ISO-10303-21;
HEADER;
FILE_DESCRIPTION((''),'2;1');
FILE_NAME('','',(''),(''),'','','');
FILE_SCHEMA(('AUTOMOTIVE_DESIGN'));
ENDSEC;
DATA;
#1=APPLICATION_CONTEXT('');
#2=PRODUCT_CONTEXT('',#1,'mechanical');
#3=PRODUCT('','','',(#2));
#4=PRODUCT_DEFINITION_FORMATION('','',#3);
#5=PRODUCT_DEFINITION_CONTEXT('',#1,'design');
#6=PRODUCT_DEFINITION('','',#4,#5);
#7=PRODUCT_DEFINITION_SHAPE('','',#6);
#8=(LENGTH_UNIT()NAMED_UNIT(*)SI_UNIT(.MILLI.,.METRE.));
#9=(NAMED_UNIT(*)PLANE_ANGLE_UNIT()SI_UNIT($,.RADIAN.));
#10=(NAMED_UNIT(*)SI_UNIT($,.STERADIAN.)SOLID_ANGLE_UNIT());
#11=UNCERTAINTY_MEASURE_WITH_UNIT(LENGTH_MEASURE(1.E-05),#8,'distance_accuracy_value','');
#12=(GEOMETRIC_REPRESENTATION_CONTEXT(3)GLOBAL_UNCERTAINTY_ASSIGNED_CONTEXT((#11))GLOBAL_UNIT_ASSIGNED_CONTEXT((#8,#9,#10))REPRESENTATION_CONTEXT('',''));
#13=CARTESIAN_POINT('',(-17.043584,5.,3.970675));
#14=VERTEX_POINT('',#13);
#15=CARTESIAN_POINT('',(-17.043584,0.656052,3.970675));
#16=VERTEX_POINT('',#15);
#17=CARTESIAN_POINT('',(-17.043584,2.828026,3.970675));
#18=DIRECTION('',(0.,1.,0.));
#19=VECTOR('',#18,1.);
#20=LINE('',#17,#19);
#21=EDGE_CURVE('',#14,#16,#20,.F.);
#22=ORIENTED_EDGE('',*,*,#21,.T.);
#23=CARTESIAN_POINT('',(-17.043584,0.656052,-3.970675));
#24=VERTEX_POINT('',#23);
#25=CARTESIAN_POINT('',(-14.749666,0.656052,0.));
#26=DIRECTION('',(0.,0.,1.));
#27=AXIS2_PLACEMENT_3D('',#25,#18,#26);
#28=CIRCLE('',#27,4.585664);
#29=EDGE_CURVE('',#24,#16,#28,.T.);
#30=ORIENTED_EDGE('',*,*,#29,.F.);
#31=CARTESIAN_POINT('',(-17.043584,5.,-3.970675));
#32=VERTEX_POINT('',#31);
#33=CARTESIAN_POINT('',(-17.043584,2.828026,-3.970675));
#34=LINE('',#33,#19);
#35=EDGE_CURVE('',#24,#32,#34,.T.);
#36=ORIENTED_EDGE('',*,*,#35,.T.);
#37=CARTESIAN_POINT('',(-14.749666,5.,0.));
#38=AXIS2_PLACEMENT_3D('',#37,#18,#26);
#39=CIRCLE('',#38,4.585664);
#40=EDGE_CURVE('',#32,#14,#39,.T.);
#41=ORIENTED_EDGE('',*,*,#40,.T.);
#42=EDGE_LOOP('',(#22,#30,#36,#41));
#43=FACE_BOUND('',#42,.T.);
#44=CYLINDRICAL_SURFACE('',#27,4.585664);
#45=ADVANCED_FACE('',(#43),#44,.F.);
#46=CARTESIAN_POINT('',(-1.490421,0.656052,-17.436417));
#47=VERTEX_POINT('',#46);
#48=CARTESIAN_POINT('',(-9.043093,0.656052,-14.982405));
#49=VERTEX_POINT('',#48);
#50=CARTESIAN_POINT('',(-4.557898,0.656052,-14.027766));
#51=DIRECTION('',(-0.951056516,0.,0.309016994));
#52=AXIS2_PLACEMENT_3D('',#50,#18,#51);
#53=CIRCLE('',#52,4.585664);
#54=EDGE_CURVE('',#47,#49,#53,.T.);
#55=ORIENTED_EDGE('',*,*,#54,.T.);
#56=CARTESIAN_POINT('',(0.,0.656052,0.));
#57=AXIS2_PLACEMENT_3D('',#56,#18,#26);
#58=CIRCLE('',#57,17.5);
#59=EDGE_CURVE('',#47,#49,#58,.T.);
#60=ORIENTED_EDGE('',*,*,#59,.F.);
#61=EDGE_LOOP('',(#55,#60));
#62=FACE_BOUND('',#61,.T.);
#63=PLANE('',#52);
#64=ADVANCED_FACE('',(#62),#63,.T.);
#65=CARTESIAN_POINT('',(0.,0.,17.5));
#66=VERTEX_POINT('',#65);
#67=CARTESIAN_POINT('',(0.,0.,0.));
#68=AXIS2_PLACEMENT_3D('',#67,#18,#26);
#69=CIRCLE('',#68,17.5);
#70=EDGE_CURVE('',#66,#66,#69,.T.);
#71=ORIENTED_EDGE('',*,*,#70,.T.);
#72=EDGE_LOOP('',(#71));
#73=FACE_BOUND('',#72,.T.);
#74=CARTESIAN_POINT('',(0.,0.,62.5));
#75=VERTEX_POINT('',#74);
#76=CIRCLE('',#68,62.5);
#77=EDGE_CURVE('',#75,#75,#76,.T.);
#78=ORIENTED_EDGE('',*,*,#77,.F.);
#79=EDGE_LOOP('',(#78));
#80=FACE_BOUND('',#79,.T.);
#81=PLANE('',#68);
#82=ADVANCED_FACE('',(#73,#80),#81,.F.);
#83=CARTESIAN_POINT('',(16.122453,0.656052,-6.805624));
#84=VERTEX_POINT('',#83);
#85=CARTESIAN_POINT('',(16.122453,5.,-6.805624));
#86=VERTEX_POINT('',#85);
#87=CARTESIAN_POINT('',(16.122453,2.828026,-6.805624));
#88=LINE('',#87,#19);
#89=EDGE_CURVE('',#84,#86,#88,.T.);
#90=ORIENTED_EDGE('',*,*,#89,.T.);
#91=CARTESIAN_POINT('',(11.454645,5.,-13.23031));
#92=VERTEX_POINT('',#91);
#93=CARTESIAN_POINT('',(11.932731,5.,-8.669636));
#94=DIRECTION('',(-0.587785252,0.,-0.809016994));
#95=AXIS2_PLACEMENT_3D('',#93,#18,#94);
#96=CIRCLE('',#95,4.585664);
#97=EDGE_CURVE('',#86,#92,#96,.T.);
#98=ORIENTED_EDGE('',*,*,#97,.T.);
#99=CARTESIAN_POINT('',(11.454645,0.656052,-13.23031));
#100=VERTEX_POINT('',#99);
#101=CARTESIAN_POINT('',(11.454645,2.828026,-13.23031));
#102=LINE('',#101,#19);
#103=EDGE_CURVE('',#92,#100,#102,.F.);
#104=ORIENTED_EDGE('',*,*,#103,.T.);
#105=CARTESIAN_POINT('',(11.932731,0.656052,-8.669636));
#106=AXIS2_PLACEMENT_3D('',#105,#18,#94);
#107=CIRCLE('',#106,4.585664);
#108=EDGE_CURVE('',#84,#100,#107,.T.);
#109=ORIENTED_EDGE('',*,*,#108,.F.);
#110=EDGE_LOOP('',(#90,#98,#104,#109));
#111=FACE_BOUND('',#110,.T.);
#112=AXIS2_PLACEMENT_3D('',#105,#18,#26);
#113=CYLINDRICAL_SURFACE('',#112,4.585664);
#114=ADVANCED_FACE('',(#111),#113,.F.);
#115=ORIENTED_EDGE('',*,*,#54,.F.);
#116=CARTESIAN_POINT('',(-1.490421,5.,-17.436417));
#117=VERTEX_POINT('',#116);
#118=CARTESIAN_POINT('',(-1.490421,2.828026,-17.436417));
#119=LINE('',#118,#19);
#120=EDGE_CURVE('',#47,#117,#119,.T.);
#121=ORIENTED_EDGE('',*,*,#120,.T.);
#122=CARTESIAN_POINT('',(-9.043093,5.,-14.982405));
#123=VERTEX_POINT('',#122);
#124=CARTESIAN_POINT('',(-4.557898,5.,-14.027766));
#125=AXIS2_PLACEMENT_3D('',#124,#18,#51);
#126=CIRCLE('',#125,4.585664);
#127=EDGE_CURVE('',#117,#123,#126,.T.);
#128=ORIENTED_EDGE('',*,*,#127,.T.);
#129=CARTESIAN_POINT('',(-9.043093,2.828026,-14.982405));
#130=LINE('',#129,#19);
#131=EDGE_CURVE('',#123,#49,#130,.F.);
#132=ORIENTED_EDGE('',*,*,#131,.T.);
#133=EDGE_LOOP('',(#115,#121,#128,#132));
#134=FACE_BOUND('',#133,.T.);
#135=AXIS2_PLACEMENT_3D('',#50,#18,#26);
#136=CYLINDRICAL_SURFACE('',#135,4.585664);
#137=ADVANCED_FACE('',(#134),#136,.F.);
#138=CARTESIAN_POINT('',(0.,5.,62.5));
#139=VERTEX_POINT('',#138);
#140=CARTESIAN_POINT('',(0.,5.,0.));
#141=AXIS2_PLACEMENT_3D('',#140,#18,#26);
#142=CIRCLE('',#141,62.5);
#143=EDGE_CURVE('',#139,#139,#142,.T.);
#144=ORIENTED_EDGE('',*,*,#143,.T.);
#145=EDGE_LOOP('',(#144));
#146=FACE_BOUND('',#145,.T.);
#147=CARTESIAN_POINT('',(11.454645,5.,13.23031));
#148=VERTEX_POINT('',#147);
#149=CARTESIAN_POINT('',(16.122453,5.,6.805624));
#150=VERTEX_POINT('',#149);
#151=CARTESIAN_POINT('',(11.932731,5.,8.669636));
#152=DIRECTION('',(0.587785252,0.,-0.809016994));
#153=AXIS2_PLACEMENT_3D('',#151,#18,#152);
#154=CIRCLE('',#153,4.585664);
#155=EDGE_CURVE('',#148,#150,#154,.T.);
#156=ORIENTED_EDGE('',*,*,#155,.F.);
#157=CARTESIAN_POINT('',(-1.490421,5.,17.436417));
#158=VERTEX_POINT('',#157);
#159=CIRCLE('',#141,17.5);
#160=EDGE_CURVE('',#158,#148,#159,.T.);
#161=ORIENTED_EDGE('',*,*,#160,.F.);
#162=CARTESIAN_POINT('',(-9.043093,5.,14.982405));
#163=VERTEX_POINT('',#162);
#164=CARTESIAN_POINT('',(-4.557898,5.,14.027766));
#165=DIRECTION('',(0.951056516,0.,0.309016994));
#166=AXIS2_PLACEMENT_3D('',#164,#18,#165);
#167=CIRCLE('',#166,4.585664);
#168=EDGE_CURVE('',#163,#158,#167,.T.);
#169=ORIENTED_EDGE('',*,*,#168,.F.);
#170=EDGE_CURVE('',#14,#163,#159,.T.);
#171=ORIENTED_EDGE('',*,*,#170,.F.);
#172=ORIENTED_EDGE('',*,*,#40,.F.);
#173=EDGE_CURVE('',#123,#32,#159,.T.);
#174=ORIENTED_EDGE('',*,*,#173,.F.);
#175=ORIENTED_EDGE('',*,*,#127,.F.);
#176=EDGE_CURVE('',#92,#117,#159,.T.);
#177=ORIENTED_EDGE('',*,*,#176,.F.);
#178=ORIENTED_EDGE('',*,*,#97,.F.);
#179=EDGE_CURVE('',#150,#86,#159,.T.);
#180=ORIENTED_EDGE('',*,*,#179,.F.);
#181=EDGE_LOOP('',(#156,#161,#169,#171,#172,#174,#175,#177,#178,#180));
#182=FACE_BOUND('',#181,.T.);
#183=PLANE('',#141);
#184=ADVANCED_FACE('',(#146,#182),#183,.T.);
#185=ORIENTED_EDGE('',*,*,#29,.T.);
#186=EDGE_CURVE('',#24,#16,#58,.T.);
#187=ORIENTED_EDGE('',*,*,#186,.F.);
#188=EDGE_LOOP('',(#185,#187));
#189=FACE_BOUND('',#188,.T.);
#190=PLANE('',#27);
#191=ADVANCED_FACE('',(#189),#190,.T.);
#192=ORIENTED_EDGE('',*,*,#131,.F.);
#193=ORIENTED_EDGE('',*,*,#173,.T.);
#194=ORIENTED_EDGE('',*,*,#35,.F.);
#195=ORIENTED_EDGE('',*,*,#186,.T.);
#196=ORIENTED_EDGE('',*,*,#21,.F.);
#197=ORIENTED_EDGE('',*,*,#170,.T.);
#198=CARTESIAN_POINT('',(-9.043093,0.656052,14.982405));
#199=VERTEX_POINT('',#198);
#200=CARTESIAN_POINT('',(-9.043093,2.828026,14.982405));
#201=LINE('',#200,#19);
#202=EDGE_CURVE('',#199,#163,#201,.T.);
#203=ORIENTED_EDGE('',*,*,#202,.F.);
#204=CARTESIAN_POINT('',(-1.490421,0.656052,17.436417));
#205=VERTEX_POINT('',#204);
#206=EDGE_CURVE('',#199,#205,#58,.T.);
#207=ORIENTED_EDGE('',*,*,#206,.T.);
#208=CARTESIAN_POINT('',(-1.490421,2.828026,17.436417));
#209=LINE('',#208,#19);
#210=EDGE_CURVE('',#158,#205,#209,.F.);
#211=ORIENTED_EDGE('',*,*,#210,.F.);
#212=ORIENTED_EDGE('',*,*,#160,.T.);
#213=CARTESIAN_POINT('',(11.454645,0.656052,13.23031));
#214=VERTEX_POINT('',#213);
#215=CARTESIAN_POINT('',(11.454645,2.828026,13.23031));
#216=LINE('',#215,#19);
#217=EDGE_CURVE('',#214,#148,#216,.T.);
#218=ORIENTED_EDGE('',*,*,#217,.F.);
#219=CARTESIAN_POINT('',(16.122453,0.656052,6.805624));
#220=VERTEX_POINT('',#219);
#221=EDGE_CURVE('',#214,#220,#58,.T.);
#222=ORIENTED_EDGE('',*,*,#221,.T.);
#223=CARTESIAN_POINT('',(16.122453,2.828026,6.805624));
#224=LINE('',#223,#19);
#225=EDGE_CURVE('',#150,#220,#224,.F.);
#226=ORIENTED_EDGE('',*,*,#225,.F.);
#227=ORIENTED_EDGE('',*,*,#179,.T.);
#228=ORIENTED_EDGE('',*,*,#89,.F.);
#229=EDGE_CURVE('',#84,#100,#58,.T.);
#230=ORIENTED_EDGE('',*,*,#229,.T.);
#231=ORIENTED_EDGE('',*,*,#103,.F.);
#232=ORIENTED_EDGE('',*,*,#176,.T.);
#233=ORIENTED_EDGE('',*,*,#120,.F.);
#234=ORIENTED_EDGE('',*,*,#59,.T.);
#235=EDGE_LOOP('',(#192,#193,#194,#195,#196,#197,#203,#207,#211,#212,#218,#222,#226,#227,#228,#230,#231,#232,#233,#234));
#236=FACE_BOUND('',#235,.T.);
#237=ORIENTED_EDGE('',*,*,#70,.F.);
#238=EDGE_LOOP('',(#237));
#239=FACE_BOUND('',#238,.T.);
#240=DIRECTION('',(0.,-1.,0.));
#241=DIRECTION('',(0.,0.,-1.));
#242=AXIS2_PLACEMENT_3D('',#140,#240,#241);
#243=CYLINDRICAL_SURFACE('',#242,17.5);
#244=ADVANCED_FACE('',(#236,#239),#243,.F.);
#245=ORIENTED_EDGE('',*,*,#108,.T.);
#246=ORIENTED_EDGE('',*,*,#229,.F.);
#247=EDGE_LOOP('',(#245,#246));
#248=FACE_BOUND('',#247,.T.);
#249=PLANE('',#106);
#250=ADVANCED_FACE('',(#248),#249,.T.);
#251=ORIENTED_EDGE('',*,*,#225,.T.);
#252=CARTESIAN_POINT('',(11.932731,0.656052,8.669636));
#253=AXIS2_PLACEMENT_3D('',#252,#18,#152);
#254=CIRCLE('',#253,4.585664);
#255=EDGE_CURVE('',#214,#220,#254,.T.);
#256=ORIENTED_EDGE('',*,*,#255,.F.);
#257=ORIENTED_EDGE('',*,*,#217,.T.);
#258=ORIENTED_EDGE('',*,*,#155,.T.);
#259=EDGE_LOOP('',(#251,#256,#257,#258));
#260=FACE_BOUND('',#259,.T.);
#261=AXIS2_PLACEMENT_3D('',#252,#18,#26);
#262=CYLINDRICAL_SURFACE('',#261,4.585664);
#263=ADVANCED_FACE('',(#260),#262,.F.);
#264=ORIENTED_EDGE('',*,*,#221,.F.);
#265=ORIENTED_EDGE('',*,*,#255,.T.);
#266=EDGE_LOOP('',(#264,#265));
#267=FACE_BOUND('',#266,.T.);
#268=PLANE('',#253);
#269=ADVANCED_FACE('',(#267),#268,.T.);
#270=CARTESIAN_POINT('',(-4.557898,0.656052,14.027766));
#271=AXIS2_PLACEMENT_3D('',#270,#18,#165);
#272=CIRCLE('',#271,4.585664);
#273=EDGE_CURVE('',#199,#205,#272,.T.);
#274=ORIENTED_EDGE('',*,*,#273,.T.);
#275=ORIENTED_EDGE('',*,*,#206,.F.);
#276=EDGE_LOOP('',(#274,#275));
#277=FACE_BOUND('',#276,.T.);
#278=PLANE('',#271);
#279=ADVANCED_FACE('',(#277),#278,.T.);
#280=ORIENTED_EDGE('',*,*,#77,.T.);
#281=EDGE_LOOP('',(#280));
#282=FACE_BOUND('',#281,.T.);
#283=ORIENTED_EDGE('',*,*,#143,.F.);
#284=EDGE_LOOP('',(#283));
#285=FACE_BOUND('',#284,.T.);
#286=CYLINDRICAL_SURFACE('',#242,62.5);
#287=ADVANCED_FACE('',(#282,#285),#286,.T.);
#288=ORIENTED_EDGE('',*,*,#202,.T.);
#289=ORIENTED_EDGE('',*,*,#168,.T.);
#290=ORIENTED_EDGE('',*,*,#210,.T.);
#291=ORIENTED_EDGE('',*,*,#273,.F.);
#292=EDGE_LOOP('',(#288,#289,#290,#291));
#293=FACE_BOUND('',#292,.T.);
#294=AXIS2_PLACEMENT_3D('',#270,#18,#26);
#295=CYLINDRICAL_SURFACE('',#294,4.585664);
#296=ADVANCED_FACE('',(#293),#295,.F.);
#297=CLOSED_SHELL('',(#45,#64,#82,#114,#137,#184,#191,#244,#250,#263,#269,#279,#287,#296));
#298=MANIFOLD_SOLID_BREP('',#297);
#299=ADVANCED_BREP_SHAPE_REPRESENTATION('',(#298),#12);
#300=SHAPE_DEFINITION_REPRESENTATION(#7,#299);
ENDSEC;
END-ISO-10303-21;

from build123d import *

# Parameters (mm, degrees)
SKETCH1_R           = 62.5
BOSS_EXTRUDE1_DEPTH = 5
SKETCH2_R           = 17.5
CUT_EXTRUDE1_DEPTH  = 89.529656048
SKETCH3_R           = 4.585663962
CUT_EXTRUDE2_DEPTH  = 4.343948076
CIRPATTERN1_COUNT   = 5


with BuildPart() as part:
    # Sketch1 → Boss-Extrude1 (new body)
    with BuildSketch(Plane(origin=(0, 0, 0), x_dir=(1, 0, 0), z_dir=(0, 1, 0))):
        Circle(SKETCH1_R)
    extrude(amount=BOSS_EXTRUDE1_DEPTH)

    # Sketch2 → Cut-Extrude1 (cut, through all)
    with BuildSketch(Plane(origin=(0, 0, 0), x_dir=(1, 0, 0), z_dir=(0, 1, 0))):
        Circle(SKETCH2_R)
    extrude(amount=CUT_EXTRUDE1_DEPTH, mode=Mode.SUBTRACT)

    # Sketch3 → Cut-Extrude2 (cut)
    with BuildSketch(Plane(origin=(0, 5, 0), x_dir=(1, 0, 0), z_dir=(0, 1, 0))):
        with Locations((-14.749666425, 0)):
            Circle(SKETCH3_R)
    cut_extrude2 = extrude(amount=-CUT_EXTRUDE2_DEPTH, mode=Mode.SUBTRACT)

    # CirPattern1: Cut-Extrude2 ×5 about axis
    cirpattern1_axis = Axis((0, 0, 0), (0, 1, 0))
    for i in range(1, CIRPATTERN1_COUNT):
        add(cut_extrude2.rotate(cirpattern1_axis, i * 360 / CIRPATTERN1_COUNT), mode=Mode.SUBTRACT)


solid = part.part
